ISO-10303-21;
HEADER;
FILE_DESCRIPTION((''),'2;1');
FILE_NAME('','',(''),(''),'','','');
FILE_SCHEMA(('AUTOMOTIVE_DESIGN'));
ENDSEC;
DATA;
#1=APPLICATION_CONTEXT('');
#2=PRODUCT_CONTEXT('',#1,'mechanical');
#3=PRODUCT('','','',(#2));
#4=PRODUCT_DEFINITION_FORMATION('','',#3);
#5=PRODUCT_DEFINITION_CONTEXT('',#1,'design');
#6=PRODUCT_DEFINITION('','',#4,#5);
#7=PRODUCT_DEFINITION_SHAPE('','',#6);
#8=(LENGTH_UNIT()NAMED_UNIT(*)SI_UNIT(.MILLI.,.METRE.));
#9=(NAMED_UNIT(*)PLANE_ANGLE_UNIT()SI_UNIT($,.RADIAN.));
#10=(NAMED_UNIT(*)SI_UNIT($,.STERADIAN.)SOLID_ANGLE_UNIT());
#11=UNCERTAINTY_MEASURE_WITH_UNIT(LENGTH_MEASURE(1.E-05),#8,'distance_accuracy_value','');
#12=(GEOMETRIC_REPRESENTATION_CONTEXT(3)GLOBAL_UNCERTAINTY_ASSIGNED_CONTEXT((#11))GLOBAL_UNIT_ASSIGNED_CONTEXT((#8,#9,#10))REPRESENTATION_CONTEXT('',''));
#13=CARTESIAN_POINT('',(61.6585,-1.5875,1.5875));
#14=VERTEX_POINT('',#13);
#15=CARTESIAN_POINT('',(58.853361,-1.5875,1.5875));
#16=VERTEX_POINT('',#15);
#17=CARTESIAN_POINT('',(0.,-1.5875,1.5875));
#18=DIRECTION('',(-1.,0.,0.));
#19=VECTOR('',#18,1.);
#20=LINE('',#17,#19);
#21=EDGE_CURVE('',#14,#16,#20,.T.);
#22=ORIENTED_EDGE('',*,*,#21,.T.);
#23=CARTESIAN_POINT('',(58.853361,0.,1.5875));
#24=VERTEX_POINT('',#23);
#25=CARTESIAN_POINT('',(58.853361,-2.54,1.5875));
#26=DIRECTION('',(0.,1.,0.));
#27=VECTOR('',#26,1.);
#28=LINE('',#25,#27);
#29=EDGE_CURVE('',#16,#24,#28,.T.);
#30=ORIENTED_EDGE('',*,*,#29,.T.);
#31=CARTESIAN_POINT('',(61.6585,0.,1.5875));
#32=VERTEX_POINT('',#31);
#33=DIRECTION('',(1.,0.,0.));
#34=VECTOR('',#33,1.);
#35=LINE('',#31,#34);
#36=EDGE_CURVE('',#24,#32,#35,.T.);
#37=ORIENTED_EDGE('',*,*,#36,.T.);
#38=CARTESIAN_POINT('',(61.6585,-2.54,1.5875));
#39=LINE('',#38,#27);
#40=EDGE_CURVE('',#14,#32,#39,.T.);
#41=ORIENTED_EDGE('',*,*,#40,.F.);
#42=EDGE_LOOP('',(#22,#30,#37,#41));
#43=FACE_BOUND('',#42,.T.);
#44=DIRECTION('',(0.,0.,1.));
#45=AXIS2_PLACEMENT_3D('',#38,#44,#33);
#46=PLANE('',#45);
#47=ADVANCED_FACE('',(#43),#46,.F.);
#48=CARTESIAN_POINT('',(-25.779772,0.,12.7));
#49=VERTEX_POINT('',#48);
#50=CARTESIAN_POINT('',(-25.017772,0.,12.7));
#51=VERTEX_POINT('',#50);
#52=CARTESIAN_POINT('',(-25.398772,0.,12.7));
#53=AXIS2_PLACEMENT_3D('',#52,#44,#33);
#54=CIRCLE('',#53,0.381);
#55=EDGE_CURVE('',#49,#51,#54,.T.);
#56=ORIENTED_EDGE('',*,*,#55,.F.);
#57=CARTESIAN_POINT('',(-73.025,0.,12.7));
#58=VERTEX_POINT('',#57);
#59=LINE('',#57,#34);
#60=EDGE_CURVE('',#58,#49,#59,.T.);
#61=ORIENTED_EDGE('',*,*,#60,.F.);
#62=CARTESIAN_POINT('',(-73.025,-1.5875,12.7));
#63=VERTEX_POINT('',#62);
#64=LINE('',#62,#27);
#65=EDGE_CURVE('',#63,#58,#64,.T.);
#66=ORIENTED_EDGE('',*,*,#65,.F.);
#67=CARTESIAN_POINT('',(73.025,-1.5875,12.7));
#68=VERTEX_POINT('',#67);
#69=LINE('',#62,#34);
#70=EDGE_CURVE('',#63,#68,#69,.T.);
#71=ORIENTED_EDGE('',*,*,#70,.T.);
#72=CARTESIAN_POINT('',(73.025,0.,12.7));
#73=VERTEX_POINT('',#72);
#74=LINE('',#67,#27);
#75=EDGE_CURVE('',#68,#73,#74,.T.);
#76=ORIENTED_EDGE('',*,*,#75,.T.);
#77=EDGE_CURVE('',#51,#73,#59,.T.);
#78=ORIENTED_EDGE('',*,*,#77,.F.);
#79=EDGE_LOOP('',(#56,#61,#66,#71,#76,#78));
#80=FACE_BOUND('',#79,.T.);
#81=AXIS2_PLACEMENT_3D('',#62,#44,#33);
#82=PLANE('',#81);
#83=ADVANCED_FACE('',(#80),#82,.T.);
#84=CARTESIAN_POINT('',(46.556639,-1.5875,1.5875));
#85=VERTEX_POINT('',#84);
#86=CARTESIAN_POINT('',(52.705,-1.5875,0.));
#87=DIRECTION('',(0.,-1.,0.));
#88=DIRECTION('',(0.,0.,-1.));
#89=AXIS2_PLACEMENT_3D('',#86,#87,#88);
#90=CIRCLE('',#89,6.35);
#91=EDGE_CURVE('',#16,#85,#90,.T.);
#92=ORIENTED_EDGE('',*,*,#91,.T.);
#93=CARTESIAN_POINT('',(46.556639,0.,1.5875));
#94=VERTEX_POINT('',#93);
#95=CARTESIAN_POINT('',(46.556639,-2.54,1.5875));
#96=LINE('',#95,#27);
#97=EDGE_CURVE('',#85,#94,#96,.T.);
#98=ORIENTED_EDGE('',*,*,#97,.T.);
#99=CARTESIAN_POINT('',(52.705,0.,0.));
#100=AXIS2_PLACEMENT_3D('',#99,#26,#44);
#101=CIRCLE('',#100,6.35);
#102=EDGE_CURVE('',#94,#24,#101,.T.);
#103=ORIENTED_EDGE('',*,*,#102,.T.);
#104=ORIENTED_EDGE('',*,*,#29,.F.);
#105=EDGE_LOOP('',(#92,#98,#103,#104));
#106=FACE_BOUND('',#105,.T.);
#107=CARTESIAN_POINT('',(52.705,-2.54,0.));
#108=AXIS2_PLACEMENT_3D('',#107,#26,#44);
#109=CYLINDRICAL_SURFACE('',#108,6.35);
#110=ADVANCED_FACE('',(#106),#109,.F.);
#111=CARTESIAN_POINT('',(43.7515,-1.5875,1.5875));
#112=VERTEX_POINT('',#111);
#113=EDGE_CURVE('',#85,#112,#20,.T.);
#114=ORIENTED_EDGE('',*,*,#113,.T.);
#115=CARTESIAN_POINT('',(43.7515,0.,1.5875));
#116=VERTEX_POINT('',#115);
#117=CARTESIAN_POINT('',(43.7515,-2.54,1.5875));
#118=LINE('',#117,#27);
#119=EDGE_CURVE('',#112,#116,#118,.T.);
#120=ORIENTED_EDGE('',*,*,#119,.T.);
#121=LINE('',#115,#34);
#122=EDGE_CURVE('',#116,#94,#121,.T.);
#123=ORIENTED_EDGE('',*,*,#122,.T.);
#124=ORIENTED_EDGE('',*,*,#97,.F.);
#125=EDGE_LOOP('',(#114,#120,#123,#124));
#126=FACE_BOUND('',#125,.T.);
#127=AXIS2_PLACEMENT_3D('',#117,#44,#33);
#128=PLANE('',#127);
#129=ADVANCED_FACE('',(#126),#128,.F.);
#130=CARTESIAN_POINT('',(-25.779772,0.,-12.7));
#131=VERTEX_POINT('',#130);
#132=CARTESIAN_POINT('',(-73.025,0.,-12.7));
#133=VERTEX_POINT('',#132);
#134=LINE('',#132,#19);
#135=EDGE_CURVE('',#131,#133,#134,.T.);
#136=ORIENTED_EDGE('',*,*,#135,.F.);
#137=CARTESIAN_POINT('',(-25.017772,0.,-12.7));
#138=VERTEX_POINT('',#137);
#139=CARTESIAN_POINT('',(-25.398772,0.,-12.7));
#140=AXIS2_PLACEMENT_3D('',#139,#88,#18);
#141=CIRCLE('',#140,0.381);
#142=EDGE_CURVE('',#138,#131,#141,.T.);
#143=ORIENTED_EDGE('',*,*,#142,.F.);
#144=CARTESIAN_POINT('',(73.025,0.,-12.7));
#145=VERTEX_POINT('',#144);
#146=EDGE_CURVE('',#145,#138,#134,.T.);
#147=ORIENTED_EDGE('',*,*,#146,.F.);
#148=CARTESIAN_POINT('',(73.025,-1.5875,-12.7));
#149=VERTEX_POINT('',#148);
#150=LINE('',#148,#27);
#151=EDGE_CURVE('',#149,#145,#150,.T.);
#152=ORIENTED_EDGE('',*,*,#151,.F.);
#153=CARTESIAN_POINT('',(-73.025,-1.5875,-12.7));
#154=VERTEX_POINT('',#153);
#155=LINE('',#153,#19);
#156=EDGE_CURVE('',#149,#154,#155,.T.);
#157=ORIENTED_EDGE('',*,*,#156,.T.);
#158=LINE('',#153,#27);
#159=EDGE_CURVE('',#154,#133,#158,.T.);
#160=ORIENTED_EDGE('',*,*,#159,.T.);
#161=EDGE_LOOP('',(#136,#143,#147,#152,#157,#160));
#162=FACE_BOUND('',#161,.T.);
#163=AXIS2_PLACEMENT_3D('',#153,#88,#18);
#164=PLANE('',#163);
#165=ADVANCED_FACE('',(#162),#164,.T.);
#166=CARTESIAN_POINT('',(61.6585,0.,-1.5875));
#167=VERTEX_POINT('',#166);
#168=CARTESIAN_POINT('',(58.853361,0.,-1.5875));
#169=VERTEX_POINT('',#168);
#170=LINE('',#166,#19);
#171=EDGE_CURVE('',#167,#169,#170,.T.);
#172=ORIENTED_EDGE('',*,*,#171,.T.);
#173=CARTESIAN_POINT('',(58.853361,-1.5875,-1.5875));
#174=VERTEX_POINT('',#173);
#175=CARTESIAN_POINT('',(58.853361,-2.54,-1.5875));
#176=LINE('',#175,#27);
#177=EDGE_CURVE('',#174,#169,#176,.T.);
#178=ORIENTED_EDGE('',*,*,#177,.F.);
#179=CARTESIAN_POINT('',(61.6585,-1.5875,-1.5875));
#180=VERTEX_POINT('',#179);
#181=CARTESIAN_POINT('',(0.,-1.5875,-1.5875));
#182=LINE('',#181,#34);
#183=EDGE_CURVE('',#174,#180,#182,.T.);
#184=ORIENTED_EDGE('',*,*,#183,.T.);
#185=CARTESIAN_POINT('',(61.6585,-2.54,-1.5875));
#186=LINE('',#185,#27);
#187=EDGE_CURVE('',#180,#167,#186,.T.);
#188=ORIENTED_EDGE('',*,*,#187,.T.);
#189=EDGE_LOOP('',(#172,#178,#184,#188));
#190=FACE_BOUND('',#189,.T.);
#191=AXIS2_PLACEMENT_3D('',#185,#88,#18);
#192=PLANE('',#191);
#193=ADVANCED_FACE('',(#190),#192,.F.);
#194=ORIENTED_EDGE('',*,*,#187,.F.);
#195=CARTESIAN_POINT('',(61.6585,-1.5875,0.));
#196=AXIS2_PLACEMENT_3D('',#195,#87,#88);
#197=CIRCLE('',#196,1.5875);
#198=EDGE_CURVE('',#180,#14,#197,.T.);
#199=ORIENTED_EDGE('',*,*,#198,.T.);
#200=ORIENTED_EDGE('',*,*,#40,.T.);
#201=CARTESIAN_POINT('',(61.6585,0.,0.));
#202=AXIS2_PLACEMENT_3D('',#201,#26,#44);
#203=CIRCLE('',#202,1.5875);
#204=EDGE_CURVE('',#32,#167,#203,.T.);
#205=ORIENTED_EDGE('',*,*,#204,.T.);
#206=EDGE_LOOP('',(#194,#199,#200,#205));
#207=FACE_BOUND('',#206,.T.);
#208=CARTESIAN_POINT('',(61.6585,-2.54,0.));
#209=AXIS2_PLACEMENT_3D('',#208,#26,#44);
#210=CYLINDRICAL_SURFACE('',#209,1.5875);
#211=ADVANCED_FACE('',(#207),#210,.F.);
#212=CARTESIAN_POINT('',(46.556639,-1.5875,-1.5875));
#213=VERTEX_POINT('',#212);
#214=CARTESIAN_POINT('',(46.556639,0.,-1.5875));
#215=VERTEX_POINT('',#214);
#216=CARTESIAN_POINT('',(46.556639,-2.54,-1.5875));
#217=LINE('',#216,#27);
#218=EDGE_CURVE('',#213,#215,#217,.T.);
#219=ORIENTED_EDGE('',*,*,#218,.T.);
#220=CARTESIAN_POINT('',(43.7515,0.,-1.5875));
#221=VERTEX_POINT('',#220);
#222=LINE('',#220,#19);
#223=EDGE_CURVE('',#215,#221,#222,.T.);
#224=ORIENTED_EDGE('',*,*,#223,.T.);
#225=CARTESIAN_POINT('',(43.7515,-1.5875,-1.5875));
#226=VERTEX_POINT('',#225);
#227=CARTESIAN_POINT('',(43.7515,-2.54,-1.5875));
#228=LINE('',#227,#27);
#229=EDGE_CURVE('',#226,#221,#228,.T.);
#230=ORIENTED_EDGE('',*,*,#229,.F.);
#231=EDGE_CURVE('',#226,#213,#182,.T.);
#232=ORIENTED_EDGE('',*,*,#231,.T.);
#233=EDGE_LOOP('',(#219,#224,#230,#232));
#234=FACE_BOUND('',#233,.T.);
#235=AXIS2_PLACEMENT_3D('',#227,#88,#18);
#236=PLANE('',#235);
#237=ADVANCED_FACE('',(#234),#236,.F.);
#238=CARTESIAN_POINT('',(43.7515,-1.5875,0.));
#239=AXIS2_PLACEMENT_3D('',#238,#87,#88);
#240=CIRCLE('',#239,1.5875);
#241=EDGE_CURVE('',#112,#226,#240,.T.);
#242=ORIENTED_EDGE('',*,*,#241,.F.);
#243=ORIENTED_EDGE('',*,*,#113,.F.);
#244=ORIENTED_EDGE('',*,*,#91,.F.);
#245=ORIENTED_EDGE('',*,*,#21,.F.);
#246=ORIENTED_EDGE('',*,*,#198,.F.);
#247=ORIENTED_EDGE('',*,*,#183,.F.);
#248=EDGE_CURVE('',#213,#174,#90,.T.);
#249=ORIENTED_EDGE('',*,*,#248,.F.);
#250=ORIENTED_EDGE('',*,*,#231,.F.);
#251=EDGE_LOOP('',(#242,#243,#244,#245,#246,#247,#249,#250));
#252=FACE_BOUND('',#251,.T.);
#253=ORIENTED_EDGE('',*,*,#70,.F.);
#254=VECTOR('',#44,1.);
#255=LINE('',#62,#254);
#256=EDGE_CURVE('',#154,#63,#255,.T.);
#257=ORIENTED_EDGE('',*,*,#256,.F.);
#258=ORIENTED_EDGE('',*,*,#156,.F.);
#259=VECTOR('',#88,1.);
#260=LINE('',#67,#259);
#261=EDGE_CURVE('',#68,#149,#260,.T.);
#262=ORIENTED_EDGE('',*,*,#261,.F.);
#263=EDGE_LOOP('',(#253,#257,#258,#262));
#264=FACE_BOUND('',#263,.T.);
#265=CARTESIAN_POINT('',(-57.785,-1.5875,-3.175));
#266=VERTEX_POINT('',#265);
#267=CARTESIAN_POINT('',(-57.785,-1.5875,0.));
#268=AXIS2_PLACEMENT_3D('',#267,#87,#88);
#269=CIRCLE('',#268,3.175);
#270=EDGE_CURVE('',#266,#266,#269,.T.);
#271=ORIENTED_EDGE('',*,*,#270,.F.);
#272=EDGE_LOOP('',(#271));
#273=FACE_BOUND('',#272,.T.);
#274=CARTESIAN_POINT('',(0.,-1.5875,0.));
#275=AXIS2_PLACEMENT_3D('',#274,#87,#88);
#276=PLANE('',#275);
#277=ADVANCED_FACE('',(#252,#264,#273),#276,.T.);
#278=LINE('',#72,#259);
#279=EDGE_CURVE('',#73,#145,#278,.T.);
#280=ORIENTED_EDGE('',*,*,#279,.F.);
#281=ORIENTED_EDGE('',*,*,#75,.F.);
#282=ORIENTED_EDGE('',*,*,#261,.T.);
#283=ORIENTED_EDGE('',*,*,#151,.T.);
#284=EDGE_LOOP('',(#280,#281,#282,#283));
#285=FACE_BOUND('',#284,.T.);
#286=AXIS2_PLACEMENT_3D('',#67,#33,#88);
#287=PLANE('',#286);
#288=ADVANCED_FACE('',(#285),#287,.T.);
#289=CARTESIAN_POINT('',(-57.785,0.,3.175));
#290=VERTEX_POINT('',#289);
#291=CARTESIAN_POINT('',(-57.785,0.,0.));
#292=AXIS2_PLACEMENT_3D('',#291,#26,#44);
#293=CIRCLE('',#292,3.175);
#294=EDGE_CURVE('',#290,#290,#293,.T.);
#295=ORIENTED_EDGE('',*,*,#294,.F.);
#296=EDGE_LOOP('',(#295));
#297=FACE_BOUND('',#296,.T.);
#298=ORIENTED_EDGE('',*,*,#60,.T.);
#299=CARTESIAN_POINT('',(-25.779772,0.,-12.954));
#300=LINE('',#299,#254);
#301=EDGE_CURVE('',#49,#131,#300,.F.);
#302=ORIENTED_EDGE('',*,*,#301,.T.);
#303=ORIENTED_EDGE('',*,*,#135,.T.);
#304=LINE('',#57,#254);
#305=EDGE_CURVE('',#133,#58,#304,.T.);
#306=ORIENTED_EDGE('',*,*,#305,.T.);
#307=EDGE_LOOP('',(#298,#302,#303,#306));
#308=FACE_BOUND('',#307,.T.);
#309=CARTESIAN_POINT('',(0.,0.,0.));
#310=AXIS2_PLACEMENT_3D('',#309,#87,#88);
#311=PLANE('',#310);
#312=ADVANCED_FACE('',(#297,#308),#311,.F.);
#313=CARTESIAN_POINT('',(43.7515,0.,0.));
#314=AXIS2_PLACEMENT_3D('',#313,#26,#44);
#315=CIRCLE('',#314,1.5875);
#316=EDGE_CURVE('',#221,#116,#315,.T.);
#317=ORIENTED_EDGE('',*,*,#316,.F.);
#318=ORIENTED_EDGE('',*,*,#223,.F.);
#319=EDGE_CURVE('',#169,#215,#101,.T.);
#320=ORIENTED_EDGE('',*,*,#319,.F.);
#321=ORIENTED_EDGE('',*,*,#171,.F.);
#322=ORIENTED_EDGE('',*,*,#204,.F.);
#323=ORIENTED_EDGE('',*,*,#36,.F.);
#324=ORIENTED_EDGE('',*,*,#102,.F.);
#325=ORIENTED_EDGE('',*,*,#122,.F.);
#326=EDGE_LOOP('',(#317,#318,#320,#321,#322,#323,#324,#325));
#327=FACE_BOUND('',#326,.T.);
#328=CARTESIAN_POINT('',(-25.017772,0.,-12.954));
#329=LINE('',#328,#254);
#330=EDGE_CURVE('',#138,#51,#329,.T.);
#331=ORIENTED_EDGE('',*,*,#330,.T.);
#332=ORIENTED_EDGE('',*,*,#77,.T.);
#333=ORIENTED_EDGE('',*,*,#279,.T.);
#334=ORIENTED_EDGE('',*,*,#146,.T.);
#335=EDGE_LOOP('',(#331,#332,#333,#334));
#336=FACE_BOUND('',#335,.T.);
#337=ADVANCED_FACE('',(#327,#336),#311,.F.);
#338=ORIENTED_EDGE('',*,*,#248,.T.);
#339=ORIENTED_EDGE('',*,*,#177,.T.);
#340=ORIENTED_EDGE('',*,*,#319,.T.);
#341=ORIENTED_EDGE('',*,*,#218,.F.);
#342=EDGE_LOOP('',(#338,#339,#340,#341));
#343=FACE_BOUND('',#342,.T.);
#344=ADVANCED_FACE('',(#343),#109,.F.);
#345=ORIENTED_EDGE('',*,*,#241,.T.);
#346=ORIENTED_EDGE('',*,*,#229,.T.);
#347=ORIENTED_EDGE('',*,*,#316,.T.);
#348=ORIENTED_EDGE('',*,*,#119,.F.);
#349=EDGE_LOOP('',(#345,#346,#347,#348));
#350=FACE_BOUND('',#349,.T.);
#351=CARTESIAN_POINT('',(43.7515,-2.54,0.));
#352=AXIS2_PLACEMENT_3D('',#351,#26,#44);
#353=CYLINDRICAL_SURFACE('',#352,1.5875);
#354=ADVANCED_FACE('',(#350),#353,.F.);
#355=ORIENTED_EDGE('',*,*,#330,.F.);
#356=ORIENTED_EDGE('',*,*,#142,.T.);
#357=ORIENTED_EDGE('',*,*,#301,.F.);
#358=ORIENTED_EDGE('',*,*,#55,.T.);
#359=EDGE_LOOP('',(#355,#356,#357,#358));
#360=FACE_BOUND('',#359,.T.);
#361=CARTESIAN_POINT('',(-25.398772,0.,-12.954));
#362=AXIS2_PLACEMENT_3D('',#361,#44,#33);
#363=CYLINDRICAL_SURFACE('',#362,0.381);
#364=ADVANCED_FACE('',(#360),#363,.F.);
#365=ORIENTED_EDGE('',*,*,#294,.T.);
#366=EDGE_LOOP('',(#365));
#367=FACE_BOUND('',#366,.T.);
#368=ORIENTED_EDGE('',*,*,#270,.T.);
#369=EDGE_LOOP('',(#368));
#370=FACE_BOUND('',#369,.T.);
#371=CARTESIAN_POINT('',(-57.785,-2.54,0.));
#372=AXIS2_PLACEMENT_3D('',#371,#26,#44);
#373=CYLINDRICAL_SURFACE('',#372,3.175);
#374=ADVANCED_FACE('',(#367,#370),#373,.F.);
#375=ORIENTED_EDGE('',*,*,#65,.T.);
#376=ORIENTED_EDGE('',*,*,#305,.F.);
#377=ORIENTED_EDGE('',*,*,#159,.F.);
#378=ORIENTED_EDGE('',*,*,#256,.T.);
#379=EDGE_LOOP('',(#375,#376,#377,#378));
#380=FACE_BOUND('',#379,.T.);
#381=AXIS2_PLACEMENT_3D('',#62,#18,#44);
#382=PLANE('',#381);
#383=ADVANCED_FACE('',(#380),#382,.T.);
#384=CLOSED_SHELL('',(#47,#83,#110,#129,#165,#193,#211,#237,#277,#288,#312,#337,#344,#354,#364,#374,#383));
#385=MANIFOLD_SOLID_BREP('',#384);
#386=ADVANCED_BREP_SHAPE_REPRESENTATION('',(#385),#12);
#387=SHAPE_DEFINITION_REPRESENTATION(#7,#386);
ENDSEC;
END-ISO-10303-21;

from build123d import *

# Parameters (mm, degrees)
SKETCH1_W          = 146.05
SKETCH1_H          = 25.4
BASE_FLANGE1_DEPTH = 1.5875
SKETCH6_R          = 3.175
CUT_EXTRUDE1_DEPTH = 2.54
CUT_EXTRUDE3_DEPTH = 2.54
SKETCH10_R         = 0.381
CUT_EXTRUDE4_DEPTH = 25.654


# Sheet-metal steps are written as plain solids
with BuildPart() as part:
    # Sketch1 → Base-Flange1 (new body)
    with BuildSketch(Plane(origin=(0, 0, 0), x_dir=(1, 0, 0), z_dir=(0, 1, 0))):
        Rectangle(SKETCH1_W, SKETCH1_H)
    extrude(amount=-BASE_FLANGE1_DEPTH)

    # Sketch6 → Cut-Extrude1 (cut)
    with BuildSketch(Plane(origin=(0, 0, 0), x_dir=(1, 0, 0), z_dir=(0, 1, 0))):
        with Locations(Location((-57.785, 0, 0), (0, 0, 270))):
            Circle(SKETCH6_R)
    extrude(amount=-CUT_EXTRUDE1_DEPTH, mode=Mode.SUBTRACT)

    # Sketch8 → Cut-Extrude3 (cut)
    with BuildSketch(Plane(origin=(0, 0, 0), x_dir=(1, 0, 0), z_dir=(0, 1, 0))):
        with BuildLine():
            Line((43.7515, 1.5875), (46.556638938, 1.5875))
            ThreePointArc((46.556638938, 1.5875), (52.705, 6.35), (58.853361062, 1.5875))
            Line((58.853361062, 1.5875), (61.6585, 1.5875))
            ThreePointArc((61.6585, 1.5875), (63.246, 0), (61.6585, -1.5875))
            Line((61.6585, -1.5875), (58.853361062, -1.5875))
            ThreePointArc((58.853361062, -1.5875), (52.705, -6.35), (46.556638938, -1.5875))
            Line((46.556638938, -1.5875), (43.7515, -1.5875))
            ThreePointArc((43.7515, -1.5875), (42.164, 0), (43.7515, 1.5875))
        make_face()
    extrude(amount=-CUT_EXTRUDE3_DEPTH, mode=Mode.SUBTRACT)

    # Sketch10 → Cut-Extrude4 (cut)
    with BuildSketch(Plane.XY.offset(12.7)):
        with Locations((-25.398772406, 0)):
            Circle(SKETCH10_R)
    extrude(amount=-CUT_EXTRUDE4_DEPTH, mode=Mode.SUBTRACT)


solid = part.part
